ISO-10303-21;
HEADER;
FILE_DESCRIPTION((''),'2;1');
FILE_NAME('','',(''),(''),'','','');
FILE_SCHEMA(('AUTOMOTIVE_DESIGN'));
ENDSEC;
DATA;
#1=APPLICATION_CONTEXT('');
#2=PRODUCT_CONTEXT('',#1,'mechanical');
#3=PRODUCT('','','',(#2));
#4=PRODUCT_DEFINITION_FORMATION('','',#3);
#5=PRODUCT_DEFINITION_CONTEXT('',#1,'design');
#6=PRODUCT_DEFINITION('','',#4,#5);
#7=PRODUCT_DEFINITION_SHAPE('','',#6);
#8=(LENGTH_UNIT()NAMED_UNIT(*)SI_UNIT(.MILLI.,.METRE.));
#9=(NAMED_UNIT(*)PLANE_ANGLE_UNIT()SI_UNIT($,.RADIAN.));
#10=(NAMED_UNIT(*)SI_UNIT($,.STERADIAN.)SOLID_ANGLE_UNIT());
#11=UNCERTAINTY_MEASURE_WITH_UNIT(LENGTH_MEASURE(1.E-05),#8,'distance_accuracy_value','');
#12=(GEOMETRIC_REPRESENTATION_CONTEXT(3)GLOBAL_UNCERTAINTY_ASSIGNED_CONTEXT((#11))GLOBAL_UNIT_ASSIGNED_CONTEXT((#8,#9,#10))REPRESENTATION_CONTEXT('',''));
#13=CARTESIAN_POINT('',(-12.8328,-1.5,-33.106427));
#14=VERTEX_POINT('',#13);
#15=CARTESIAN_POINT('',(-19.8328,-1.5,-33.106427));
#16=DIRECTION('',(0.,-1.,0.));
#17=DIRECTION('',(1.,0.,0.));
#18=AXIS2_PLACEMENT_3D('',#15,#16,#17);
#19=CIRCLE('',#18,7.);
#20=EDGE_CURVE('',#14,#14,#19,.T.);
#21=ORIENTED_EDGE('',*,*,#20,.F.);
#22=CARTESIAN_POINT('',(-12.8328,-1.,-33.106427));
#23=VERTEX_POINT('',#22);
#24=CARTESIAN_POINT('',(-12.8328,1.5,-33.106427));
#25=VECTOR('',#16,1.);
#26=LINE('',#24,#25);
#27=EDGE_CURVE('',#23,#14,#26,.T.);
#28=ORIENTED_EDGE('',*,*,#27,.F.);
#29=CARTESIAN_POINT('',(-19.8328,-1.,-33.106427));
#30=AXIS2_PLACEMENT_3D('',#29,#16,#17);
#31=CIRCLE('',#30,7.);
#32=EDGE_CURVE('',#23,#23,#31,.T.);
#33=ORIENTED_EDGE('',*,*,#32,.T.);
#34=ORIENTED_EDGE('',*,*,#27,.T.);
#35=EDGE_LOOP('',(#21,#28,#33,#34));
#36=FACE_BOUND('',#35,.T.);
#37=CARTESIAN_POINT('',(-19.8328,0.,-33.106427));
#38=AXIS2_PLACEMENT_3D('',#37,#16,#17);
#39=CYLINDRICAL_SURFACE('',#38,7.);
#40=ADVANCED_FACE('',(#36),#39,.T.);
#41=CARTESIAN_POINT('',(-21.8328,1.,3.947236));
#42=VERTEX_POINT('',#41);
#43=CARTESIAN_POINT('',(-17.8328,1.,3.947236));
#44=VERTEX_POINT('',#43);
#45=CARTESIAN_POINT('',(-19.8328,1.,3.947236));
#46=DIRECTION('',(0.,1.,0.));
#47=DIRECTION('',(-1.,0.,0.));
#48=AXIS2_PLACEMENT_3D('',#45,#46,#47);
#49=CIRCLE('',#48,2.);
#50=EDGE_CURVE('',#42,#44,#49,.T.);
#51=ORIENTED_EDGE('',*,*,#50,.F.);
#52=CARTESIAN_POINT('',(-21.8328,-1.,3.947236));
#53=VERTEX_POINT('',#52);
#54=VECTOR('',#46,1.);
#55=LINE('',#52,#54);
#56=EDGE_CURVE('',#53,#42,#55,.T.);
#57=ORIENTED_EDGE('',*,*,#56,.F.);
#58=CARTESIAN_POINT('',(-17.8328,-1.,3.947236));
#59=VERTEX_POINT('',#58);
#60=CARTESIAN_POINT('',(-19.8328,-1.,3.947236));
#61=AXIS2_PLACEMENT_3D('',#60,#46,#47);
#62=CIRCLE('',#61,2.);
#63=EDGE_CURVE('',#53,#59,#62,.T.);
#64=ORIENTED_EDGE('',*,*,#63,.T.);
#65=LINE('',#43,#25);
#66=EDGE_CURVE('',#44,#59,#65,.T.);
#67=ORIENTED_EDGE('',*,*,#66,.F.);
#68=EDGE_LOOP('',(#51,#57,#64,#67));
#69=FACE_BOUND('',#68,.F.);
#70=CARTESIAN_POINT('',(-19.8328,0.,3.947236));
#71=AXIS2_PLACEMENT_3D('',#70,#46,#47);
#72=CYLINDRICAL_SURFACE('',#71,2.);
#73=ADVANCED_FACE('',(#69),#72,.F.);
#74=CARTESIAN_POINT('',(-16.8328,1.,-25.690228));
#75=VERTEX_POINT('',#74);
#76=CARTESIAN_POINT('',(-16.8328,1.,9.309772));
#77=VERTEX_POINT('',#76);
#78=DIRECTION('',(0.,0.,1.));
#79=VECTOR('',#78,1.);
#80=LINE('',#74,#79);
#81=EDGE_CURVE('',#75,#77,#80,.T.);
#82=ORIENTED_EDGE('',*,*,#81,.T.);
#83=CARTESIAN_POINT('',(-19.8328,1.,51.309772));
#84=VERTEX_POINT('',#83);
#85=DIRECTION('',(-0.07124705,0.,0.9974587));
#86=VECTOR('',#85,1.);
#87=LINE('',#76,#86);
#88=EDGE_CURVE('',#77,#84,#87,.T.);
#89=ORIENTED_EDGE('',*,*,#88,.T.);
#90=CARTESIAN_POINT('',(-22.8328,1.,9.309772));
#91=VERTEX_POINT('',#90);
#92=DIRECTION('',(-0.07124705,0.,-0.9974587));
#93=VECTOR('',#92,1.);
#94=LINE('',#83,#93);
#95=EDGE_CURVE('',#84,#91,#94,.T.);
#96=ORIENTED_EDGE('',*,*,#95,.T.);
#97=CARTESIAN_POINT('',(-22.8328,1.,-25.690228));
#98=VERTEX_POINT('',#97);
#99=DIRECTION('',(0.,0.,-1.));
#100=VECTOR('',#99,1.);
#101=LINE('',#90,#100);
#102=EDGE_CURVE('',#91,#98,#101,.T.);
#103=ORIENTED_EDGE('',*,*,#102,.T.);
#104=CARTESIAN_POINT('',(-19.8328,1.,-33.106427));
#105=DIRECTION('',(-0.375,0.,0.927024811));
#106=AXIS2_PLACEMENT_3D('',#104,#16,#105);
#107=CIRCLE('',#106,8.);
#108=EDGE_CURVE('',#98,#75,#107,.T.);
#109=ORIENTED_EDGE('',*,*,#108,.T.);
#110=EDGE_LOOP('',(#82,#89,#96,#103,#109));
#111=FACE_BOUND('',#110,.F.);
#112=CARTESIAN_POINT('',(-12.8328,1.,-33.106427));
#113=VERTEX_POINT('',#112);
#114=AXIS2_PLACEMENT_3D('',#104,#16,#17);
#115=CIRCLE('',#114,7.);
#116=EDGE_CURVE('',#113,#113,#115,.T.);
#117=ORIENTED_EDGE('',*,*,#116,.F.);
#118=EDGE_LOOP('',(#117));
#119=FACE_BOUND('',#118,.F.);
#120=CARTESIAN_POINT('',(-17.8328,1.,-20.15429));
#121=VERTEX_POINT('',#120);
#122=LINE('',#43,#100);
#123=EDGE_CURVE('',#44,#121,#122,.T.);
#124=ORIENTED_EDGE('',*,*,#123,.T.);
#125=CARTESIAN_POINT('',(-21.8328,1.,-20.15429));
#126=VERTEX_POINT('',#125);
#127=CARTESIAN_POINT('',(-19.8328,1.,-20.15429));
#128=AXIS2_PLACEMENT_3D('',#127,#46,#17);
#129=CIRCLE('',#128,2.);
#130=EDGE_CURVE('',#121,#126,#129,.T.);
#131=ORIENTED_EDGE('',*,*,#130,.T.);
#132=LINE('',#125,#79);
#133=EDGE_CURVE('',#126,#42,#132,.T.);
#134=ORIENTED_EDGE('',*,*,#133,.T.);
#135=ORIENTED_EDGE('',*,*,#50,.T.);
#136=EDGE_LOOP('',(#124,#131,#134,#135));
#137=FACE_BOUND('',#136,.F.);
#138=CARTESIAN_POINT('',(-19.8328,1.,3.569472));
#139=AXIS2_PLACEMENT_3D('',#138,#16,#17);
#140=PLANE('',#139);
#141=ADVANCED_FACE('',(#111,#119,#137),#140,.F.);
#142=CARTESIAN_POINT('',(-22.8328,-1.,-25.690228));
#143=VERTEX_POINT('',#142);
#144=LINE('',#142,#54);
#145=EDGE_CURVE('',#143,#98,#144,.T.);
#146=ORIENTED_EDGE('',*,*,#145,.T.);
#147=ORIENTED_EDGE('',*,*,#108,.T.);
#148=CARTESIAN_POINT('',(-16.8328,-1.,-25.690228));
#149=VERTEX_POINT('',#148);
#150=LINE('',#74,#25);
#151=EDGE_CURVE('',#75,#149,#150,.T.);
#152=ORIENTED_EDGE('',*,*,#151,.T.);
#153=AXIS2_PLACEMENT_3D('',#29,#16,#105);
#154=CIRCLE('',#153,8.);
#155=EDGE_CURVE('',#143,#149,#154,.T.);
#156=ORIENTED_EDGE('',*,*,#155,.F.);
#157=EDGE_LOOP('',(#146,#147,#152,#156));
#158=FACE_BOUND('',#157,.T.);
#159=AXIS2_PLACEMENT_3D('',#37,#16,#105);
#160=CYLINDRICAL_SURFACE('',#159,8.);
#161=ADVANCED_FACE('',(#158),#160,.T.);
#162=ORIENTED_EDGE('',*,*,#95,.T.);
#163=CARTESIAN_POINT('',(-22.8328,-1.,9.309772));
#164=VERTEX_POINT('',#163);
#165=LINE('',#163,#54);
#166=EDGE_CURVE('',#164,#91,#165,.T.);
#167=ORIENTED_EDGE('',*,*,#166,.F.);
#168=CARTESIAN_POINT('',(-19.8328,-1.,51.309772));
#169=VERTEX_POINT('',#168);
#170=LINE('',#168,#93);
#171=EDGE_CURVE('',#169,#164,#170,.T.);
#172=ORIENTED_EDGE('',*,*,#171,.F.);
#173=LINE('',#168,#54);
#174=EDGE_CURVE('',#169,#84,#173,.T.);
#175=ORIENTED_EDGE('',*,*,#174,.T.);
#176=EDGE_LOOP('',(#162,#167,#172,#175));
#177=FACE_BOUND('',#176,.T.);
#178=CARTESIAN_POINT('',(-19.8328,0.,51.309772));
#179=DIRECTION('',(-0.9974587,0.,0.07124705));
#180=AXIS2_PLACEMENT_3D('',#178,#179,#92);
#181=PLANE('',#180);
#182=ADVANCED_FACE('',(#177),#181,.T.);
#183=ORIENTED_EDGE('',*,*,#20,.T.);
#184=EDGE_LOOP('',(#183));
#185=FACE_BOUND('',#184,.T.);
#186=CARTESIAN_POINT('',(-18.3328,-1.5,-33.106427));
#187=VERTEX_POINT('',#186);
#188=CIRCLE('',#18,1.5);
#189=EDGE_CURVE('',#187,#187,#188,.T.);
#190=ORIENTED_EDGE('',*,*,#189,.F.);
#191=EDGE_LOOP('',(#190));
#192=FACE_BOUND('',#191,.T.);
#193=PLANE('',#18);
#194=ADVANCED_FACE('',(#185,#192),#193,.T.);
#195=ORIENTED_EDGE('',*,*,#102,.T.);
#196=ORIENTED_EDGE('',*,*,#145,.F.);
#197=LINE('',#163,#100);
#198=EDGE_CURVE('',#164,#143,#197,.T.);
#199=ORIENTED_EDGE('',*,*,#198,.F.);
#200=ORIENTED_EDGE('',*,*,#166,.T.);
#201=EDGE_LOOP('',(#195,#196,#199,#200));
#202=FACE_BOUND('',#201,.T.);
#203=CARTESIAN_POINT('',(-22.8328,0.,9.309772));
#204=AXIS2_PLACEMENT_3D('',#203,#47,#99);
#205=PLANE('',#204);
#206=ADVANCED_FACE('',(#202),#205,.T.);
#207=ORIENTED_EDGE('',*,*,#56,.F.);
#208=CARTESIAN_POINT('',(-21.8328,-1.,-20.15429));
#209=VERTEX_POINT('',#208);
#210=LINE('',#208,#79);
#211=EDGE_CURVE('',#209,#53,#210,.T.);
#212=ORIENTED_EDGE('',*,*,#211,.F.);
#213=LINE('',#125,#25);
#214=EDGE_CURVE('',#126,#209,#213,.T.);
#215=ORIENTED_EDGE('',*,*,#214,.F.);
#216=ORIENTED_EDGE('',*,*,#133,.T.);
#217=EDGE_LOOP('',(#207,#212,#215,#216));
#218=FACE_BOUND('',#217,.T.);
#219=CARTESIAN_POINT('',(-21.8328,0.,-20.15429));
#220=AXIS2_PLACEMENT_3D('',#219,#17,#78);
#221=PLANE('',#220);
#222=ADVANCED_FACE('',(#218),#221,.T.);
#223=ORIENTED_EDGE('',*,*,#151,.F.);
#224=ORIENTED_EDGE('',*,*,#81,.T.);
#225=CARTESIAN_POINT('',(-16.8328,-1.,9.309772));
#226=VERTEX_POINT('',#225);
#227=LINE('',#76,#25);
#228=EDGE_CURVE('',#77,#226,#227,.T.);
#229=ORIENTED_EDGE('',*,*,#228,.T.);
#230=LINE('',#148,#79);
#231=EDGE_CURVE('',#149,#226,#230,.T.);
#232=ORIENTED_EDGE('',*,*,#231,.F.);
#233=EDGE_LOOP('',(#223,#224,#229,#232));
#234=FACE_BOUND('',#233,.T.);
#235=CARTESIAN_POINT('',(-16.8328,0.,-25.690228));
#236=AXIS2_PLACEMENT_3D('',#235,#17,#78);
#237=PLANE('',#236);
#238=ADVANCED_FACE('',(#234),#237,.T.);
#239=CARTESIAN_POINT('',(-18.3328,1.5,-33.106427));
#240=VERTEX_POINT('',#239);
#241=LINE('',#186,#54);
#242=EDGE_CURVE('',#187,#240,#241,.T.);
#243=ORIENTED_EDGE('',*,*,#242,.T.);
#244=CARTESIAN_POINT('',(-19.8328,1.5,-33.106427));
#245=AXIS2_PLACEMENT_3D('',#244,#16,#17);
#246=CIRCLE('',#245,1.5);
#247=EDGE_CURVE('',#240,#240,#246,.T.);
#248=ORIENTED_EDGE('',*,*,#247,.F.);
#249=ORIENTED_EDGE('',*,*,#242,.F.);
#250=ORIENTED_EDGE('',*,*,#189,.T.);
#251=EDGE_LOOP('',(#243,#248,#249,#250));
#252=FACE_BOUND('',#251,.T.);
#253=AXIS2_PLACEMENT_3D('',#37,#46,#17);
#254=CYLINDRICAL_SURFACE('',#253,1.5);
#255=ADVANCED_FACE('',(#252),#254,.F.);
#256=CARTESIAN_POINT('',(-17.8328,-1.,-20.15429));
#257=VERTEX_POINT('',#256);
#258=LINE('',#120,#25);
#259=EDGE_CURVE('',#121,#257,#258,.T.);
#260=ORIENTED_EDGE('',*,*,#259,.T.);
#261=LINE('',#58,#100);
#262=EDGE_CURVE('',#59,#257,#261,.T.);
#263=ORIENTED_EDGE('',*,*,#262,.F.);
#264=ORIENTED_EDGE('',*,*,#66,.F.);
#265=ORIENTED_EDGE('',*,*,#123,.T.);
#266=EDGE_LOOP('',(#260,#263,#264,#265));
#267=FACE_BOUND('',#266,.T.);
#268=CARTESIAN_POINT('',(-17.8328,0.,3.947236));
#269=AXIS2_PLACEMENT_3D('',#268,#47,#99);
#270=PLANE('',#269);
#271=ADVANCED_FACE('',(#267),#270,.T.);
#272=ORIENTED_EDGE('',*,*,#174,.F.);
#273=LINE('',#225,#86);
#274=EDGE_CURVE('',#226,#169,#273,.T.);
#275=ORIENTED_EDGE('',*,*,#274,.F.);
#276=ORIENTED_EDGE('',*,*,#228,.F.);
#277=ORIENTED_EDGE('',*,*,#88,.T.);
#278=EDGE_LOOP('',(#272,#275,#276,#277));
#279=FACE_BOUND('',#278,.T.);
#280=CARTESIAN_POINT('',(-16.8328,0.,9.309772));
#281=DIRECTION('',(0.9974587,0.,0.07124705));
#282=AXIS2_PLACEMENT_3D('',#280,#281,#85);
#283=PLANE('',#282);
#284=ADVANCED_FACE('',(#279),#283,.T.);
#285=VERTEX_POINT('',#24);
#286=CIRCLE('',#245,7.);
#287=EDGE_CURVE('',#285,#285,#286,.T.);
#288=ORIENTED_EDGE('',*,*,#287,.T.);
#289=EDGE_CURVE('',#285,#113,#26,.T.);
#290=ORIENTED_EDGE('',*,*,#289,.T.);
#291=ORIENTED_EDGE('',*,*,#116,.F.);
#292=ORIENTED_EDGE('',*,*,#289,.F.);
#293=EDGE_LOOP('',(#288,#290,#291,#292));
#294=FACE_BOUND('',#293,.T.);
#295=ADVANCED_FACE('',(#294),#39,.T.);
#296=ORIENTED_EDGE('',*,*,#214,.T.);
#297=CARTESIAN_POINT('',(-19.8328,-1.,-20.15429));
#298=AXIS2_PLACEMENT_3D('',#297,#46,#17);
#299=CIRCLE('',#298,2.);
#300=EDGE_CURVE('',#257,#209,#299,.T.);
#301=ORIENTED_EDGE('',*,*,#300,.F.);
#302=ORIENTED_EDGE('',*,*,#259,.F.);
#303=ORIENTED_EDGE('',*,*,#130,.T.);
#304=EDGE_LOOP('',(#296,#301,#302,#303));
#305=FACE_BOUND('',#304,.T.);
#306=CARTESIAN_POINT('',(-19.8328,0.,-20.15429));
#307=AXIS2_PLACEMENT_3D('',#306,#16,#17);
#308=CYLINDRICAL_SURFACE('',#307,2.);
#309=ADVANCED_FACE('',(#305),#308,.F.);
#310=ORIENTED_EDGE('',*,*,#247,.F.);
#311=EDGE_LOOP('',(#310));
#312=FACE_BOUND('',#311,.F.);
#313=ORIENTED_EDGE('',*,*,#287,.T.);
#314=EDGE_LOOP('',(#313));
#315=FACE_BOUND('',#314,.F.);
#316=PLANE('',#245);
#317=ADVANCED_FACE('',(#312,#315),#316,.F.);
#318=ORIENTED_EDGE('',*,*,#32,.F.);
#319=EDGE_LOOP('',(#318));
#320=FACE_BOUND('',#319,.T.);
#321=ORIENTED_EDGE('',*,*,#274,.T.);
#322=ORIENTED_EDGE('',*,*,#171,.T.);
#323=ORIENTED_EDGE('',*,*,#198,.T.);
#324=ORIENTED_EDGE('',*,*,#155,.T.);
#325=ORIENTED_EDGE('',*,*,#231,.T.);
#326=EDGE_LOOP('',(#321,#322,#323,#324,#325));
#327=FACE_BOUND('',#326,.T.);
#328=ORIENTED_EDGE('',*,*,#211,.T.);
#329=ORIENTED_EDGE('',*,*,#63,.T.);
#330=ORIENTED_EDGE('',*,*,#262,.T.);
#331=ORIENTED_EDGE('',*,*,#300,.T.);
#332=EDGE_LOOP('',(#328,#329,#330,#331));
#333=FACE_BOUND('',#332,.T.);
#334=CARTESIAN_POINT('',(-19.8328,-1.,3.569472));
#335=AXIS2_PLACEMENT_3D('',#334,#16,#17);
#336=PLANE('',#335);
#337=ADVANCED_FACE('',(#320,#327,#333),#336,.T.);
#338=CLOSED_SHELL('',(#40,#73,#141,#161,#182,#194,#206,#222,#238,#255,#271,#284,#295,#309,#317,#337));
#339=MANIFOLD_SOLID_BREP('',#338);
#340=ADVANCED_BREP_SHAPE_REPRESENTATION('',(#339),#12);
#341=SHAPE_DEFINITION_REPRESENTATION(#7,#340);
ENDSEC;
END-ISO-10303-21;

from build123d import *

# Parameters (mm, degrees)
F0_R     = 7
F0_R_2   = 1.5
F1_DEPTH = 1.5
F2_DEPTH = 1


# Not quite as in the source:
# - a feature names something its author has since deleted; it is built from what else it names


with BuildPart() as f1:
    # F0 (on Front) → F1 (new body, symmetric)
    with BuildSketch(Plane.XZ):
        with Locations((-19.8327995853, -33.1064267996)):
            Circle(F0_R)
        with Locations((-19.8327995853, -33.1064267996)):
            Circle(F0_R_2, mode=Mode.SUBTRACT)
    extrude(amount=F1_DEPTH, both=True)

    # F0 (on Front) → F2 (join, symmetric)
    with BuildSketch(Plane.XZ):
        with BuildLine():
            ThreePointArc((-22.8327995853, -25.6902283125), (-19.8327995853, -41.1064267996), (-16.8327995853, -25.6902283125))
            Line((-16.8327995853, -25.6902283125), (-16.8327995853, 9.3097716875))
            Line((-16.8327995853, 9.3097716875), (-19.8327995853, 51.3097716875))
            Line((-19.8327995853, 51.3097716875), (-22.8327995853, 9.3097716875))
            Line((-22.8327995853, 9.3097716875), (-22.8327995853, -25.6902283125))
        make_face()
        with Locations((-19.8327995853, -33.1064267996)):
            Circle(F0_R, mode=Mode.SUBTRACT)
        with BuildLine():
            ThreePointArc((-21.8327995853, 3.9472361095), (-19.8327995853, 5.9472361095), (-17.8327995853, 3.9472361095))
            Line((-17.8327995853, 3.9472361095), (-17.8327995853, -20.1542899013))
            ThreePointArc((-17.8327995853, -20.1542899013), (-19.8327995853, -22.1542899013), (-21.8327995853, -20.1542899013))
            Line((-21.8327995853, -20.1542899013), (-21.8327995853, 3.9472361095))
        make_face(mode=Mode.SUBTRACT)
    extrude(amount=F2_DEPTH, both=True)


solid = f1.part
